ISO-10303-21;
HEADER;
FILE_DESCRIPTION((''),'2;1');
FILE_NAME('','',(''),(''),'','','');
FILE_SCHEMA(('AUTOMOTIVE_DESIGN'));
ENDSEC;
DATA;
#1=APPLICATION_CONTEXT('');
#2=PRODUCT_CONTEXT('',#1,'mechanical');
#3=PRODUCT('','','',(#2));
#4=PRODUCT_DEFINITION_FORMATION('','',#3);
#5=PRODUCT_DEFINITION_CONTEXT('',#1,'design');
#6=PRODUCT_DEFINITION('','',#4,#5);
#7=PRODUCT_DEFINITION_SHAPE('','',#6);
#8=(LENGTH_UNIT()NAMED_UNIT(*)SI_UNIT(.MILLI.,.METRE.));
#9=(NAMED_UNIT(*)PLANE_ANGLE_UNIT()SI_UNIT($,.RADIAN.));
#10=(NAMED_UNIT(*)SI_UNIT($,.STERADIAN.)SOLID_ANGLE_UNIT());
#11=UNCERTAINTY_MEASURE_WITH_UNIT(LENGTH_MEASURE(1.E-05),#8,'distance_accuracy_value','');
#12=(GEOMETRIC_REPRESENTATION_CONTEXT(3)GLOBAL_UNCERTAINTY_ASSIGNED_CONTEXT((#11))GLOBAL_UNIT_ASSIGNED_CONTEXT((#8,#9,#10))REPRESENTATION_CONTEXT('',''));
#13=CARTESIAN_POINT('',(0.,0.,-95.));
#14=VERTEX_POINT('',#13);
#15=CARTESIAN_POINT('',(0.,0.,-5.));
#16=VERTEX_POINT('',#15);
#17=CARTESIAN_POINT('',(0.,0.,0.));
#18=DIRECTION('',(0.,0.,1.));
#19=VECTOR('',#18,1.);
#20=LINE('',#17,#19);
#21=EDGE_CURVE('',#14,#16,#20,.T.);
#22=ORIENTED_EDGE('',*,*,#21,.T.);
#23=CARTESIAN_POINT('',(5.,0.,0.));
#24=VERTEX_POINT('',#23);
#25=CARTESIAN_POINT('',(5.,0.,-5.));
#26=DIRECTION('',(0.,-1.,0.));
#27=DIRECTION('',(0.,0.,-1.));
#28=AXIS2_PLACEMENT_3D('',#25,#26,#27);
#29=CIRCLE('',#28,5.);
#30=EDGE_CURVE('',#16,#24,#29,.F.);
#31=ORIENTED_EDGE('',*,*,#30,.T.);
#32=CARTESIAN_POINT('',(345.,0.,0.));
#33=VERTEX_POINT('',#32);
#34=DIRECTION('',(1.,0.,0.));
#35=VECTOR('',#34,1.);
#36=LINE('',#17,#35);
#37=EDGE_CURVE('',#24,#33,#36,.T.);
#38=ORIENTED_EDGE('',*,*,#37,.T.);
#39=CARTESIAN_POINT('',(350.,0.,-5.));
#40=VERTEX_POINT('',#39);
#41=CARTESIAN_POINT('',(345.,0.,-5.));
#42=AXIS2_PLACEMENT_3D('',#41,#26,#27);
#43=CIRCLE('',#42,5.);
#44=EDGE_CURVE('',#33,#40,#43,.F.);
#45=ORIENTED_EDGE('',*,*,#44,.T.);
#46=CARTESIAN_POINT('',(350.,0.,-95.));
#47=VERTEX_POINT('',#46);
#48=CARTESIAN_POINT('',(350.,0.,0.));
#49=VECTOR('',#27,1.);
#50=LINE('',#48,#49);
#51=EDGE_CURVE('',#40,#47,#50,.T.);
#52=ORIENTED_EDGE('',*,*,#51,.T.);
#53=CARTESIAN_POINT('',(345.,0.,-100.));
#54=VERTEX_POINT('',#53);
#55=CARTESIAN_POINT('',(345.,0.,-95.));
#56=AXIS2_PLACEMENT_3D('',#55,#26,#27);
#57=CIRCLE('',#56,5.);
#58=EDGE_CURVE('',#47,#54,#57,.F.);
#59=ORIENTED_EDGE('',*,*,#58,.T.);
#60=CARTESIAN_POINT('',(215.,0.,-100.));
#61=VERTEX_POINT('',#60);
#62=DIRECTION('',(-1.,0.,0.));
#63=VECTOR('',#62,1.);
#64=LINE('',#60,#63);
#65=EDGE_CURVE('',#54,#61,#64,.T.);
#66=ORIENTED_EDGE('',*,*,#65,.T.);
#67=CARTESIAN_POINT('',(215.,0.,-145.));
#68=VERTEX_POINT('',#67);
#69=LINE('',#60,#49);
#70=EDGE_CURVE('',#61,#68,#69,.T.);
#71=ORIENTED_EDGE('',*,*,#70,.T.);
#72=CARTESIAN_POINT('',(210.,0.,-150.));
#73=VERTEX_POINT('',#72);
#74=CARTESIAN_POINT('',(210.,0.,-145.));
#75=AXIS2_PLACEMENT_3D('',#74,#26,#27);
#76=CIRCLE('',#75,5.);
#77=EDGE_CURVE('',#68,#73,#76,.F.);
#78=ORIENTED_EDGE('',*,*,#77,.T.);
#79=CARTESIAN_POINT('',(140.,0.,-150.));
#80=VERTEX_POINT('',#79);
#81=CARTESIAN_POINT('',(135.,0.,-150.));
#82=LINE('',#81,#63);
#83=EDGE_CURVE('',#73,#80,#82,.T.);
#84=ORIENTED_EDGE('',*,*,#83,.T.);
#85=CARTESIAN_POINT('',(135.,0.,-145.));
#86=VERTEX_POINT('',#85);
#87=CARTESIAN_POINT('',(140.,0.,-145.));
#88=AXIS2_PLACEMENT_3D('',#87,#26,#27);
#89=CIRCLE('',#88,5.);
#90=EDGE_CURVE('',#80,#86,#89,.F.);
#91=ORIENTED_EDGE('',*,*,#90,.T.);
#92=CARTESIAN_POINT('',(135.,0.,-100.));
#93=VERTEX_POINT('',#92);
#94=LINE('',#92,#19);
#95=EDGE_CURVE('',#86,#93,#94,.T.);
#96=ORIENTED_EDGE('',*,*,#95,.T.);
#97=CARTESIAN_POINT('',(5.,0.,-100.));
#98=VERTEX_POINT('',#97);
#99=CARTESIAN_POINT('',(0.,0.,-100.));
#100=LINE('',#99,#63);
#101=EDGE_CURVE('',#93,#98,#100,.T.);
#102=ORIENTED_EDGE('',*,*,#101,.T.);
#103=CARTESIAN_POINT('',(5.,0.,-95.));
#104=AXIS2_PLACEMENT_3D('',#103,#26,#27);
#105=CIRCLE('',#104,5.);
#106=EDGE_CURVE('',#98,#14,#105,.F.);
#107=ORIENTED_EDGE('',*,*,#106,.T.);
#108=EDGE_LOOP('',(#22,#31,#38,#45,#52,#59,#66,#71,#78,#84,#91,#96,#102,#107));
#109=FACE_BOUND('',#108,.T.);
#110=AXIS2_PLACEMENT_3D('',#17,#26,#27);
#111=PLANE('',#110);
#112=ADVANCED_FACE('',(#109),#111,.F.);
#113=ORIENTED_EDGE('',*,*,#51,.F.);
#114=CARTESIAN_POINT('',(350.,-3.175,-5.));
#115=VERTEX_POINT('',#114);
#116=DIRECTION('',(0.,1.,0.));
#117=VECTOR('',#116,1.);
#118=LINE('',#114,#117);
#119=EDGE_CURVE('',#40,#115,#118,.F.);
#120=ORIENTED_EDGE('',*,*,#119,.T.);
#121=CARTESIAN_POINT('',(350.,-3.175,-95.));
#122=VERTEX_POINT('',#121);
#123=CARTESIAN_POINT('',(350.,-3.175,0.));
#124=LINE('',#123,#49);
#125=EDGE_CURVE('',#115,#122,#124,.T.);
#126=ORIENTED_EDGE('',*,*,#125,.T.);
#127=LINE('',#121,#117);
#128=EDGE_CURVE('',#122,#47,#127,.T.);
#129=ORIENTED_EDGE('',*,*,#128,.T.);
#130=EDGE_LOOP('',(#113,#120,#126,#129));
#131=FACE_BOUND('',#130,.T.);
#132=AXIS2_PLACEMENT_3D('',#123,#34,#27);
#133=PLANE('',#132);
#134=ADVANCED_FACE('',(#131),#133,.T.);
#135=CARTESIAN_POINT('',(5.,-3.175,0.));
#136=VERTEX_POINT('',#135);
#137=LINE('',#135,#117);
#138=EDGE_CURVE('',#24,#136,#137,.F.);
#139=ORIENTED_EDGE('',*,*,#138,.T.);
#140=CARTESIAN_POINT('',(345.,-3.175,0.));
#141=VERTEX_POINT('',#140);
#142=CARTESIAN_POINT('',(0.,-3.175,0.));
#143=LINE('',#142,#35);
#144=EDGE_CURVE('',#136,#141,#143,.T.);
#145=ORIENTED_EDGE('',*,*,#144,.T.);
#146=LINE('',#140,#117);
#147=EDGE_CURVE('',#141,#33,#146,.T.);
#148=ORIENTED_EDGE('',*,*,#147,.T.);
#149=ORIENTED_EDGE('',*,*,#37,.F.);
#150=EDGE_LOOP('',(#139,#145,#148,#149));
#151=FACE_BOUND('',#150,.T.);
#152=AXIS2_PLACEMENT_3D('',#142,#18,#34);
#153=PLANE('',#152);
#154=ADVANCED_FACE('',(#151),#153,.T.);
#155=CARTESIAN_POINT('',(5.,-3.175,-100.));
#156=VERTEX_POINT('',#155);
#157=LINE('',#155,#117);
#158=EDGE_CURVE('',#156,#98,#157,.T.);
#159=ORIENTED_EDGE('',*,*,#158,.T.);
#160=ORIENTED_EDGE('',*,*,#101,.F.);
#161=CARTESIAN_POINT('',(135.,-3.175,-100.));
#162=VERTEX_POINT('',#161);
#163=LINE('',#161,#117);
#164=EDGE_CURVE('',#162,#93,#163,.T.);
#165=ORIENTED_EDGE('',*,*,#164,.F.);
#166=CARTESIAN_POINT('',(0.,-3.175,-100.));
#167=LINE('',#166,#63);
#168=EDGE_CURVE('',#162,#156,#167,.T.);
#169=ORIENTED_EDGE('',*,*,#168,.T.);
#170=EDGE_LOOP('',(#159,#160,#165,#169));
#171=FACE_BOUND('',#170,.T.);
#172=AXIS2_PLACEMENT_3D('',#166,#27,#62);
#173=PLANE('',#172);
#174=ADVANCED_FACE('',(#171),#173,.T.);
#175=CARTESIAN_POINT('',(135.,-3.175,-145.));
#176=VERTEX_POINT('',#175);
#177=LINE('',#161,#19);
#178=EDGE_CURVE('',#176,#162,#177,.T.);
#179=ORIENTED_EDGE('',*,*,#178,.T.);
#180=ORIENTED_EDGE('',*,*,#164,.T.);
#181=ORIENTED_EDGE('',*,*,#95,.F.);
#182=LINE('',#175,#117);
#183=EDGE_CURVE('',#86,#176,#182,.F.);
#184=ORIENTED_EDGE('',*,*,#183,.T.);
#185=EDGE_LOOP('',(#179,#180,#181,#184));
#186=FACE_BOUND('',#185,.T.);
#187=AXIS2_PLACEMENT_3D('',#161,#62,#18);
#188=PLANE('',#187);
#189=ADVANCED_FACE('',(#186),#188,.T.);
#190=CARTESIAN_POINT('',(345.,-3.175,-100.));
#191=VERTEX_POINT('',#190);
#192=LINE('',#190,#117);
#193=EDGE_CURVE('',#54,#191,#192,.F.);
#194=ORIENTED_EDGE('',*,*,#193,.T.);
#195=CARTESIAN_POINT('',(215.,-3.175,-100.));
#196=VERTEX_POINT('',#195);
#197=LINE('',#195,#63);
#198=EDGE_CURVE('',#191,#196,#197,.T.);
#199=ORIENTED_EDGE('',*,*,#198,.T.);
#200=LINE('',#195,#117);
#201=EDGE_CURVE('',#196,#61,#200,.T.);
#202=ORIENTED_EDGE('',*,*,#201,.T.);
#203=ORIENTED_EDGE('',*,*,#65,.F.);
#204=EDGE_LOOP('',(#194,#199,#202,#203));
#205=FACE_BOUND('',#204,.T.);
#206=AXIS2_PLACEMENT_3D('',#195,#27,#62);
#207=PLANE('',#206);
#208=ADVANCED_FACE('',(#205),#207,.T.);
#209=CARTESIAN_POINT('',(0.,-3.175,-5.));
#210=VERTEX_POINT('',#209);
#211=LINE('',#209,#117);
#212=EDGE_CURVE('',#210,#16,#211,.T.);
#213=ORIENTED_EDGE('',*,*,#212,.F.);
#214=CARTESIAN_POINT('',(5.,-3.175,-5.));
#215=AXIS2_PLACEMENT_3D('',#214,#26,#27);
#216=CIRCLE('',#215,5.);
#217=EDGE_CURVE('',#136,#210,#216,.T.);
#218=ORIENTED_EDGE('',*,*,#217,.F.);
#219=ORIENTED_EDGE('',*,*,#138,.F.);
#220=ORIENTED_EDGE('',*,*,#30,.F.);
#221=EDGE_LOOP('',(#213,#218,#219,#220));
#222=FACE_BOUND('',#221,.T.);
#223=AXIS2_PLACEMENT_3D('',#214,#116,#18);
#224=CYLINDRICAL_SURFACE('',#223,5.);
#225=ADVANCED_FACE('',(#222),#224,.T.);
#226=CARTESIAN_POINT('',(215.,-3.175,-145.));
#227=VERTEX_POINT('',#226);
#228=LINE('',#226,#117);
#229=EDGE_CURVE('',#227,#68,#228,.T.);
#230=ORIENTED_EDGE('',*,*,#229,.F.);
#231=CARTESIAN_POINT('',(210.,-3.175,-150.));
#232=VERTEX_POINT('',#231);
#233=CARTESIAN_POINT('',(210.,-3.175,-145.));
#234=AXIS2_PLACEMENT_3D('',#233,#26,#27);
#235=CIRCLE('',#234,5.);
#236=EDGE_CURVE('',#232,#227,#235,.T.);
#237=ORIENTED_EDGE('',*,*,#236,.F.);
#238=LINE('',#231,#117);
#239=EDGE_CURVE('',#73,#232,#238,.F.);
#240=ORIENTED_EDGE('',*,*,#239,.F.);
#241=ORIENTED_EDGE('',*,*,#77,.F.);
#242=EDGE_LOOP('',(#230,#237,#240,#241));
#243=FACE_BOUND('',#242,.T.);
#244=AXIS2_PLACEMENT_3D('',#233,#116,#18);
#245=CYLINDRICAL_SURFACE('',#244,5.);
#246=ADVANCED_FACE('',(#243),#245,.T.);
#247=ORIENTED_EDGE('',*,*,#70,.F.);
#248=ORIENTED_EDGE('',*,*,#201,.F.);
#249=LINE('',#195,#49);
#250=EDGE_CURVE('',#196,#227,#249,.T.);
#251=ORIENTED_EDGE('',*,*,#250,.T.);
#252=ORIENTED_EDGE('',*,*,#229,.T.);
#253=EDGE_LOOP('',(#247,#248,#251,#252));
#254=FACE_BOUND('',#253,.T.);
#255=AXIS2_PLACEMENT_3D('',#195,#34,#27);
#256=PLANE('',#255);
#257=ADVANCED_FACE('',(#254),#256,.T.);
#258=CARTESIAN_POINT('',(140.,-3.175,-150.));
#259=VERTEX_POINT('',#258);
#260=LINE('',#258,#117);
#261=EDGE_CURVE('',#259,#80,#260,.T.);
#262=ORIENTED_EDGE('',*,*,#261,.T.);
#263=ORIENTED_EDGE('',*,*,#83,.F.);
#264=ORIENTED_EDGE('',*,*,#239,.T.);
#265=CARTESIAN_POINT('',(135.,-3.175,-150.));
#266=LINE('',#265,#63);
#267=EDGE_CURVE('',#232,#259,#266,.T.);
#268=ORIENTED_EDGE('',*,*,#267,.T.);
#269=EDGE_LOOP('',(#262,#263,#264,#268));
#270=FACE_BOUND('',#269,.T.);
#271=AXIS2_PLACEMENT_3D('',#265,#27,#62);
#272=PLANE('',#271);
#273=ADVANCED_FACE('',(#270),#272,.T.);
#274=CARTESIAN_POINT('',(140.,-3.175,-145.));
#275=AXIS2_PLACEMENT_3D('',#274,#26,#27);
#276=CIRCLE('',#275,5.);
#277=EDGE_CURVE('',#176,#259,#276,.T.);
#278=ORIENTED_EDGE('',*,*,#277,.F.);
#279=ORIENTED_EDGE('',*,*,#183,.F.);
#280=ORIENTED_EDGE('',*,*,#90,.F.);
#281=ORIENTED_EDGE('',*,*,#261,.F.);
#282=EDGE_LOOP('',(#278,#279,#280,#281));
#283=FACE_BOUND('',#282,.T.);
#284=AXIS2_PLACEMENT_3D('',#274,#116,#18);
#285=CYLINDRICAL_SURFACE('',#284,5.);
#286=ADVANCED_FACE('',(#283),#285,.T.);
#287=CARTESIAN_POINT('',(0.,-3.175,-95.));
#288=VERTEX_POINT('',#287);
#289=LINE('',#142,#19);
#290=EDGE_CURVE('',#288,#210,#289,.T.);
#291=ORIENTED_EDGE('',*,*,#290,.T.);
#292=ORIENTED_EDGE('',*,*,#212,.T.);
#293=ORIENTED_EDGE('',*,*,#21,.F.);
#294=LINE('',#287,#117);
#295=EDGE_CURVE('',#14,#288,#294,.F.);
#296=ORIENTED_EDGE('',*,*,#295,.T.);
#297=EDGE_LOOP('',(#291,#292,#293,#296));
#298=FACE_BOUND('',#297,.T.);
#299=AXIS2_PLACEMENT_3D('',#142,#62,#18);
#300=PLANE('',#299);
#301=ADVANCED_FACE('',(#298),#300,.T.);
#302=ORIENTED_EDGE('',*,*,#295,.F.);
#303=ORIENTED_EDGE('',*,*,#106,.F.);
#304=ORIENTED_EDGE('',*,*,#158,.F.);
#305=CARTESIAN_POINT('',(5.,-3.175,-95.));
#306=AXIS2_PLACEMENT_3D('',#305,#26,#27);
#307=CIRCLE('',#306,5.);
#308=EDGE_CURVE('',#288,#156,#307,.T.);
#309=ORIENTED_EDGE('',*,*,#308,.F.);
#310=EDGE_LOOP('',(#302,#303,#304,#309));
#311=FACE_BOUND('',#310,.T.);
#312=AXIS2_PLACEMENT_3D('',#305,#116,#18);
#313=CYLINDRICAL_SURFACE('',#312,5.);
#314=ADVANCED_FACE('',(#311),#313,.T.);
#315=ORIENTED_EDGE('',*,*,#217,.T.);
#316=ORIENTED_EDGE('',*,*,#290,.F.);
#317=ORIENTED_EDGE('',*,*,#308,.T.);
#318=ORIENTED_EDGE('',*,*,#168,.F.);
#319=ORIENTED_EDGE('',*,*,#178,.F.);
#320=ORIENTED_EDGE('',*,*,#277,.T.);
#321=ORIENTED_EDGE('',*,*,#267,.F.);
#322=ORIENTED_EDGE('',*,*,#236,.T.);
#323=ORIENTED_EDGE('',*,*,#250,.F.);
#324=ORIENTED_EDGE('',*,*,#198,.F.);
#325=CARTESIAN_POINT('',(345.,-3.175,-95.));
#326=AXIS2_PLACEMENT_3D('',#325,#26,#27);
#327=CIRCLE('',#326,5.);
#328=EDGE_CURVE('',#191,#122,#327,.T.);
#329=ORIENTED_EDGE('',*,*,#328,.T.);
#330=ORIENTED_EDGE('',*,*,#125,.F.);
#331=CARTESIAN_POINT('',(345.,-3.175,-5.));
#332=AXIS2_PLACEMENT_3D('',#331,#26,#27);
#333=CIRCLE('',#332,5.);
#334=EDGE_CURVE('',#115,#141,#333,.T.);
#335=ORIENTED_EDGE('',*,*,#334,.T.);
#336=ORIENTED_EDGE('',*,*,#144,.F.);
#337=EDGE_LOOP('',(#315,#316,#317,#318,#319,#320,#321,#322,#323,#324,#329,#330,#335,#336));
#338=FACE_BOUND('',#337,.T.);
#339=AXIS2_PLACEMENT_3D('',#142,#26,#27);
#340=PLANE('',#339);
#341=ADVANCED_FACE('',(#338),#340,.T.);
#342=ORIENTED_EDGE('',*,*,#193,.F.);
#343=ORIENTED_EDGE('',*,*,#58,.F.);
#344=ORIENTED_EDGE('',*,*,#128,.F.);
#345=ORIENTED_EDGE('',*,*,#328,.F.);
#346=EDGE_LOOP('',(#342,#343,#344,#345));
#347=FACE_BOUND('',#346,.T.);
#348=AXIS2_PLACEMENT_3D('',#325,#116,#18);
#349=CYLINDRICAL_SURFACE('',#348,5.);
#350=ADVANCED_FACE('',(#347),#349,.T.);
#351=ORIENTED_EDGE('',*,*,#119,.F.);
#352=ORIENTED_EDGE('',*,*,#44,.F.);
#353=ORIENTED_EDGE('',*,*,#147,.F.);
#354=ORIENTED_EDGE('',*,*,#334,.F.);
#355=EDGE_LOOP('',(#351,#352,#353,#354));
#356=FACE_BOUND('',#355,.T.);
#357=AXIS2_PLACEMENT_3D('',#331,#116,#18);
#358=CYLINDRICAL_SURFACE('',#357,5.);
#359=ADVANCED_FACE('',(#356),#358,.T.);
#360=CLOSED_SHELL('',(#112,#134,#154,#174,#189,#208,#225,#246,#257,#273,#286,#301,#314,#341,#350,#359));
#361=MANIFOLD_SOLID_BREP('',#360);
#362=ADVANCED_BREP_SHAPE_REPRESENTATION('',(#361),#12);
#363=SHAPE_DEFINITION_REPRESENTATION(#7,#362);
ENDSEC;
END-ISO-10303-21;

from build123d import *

# Parameters (mm, degrees)
BASE_FLANGE1_DEPTH = 3.175
FILLET1_R          = 5


# Sheet-metal steps are written as plain solids
with BuildPart() as part:
    # Sketch1 → Base-Flange1 (new body)
    with BuildSketch(Plane(origin=(0, 0, 0), x_dir=(1, 0, 0), z_dir=(0, 1, 0))):
        Polygon((215, 100), (350, 100), (350, 0), (0, 0), (0, 100), (135, 100), (135, 150), (215, 150), align=None)
    extrude(amount=-BASE_FLANGE1_DEPTH)

    # Fillet1
    fillet1_edges = [part.edges().sort_by_distance(p)[0] for p in [
        (0, -1.5875, -100),
        (135, -1.5875, -150),
        (215, -1.5875, -150),
        (350, -1.5875, -100),
        (350, -1.5875, 0),
        (0, -1.5875, 0),
    ]]
    fillet(fillet1_edges, radius=FILLET1_R)


solid = part.part
